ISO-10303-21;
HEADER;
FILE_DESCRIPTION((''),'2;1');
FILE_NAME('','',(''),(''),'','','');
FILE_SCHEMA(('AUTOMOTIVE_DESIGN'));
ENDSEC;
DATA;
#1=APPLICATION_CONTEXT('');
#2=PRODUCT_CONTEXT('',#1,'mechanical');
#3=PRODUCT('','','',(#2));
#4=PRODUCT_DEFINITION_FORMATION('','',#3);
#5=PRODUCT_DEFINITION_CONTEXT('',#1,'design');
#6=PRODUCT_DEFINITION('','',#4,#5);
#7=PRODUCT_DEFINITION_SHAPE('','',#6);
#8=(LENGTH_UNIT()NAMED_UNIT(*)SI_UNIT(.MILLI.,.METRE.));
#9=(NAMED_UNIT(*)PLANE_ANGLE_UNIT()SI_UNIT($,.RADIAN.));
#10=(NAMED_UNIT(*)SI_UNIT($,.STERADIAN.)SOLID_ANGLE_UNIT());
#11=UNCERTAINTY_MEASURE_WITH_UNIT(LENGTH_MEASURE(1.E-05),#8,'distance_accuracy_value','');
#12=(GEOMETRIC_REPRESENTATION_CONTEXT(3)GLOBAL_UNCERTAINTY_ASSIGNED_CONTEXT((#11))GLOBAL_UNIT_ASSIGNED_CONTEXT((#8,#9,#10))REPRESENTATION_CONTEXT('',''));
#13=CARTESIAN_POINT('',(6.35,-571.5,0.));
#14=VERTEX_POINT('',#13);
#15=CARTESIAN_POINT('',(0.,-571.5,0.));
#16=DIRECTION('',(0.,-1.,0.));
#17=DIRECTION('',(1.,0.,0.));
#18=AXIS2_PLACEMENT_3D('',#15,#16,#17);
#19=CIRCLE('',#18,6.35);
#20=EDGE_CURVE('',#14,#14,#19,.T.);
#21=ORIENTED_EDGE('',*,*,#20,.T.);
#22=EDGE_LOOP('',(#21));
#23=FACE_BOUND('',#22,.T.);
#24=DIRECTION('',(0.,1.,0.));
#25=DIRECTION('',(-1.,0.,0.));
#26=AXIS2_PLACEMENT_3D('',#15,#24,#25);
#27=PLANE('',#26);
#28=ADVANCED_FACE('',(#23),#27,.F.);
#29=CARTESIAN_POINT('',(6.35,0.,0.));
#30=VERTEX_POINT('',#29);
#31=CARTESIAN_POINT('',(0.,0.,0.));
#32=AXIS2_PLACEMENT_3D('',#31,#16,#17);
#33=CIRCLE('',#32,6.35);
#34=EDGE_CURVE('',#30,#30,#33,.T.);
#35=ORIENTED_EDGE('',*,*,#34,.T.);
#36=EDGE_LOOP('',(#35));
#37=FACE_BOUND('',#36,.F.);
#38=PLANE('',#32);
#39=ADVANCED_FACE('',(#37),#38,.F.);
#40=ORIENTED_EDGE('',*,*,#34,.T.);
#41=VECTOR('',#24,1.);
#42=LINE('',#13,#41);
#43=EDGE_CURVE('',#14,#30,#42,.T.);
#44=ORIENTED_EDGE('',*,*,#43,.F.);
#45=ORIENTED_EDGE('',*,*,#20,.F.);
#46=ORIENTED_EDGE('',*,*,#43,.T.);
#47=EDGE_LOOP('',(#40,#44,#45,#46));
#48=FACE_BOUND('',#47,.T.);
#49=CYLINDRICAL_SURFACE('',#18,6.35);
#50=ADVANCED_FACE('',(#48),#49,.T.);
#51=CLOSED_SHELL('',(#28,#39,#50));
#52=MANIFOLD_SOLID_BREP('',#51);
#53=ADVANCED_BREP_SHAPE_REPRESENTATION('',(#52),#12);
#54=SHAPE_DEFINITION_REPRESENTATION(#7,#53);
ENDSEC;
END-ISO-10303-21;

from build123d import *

# Parameters (mm, degrees)
F0_R     = 6.35
F1_DEPTH = 469.9


# Not quite as in the source:
# - a pattern or mirror of a feature is missing from the dataset's text; its kind, count and spacing are read off the source's solid


with BuildPart() as f1:
    # F0 (on Front) → F1 (new body)
    with BuildSketch(Plane.XZ):
        Circle(F0_R)
    extrude(amount=F1_DEPTH)

    # F1_copies: F1 across plane


with BuildPart() as f1_1:
    add(f1.part)
    add(f1.part.mirror(Plane(origin=(0, -285.75, 0), x_dir=(0, 0, -1), z_dir=(0, -1, 0))))


solid = f1_1.part
